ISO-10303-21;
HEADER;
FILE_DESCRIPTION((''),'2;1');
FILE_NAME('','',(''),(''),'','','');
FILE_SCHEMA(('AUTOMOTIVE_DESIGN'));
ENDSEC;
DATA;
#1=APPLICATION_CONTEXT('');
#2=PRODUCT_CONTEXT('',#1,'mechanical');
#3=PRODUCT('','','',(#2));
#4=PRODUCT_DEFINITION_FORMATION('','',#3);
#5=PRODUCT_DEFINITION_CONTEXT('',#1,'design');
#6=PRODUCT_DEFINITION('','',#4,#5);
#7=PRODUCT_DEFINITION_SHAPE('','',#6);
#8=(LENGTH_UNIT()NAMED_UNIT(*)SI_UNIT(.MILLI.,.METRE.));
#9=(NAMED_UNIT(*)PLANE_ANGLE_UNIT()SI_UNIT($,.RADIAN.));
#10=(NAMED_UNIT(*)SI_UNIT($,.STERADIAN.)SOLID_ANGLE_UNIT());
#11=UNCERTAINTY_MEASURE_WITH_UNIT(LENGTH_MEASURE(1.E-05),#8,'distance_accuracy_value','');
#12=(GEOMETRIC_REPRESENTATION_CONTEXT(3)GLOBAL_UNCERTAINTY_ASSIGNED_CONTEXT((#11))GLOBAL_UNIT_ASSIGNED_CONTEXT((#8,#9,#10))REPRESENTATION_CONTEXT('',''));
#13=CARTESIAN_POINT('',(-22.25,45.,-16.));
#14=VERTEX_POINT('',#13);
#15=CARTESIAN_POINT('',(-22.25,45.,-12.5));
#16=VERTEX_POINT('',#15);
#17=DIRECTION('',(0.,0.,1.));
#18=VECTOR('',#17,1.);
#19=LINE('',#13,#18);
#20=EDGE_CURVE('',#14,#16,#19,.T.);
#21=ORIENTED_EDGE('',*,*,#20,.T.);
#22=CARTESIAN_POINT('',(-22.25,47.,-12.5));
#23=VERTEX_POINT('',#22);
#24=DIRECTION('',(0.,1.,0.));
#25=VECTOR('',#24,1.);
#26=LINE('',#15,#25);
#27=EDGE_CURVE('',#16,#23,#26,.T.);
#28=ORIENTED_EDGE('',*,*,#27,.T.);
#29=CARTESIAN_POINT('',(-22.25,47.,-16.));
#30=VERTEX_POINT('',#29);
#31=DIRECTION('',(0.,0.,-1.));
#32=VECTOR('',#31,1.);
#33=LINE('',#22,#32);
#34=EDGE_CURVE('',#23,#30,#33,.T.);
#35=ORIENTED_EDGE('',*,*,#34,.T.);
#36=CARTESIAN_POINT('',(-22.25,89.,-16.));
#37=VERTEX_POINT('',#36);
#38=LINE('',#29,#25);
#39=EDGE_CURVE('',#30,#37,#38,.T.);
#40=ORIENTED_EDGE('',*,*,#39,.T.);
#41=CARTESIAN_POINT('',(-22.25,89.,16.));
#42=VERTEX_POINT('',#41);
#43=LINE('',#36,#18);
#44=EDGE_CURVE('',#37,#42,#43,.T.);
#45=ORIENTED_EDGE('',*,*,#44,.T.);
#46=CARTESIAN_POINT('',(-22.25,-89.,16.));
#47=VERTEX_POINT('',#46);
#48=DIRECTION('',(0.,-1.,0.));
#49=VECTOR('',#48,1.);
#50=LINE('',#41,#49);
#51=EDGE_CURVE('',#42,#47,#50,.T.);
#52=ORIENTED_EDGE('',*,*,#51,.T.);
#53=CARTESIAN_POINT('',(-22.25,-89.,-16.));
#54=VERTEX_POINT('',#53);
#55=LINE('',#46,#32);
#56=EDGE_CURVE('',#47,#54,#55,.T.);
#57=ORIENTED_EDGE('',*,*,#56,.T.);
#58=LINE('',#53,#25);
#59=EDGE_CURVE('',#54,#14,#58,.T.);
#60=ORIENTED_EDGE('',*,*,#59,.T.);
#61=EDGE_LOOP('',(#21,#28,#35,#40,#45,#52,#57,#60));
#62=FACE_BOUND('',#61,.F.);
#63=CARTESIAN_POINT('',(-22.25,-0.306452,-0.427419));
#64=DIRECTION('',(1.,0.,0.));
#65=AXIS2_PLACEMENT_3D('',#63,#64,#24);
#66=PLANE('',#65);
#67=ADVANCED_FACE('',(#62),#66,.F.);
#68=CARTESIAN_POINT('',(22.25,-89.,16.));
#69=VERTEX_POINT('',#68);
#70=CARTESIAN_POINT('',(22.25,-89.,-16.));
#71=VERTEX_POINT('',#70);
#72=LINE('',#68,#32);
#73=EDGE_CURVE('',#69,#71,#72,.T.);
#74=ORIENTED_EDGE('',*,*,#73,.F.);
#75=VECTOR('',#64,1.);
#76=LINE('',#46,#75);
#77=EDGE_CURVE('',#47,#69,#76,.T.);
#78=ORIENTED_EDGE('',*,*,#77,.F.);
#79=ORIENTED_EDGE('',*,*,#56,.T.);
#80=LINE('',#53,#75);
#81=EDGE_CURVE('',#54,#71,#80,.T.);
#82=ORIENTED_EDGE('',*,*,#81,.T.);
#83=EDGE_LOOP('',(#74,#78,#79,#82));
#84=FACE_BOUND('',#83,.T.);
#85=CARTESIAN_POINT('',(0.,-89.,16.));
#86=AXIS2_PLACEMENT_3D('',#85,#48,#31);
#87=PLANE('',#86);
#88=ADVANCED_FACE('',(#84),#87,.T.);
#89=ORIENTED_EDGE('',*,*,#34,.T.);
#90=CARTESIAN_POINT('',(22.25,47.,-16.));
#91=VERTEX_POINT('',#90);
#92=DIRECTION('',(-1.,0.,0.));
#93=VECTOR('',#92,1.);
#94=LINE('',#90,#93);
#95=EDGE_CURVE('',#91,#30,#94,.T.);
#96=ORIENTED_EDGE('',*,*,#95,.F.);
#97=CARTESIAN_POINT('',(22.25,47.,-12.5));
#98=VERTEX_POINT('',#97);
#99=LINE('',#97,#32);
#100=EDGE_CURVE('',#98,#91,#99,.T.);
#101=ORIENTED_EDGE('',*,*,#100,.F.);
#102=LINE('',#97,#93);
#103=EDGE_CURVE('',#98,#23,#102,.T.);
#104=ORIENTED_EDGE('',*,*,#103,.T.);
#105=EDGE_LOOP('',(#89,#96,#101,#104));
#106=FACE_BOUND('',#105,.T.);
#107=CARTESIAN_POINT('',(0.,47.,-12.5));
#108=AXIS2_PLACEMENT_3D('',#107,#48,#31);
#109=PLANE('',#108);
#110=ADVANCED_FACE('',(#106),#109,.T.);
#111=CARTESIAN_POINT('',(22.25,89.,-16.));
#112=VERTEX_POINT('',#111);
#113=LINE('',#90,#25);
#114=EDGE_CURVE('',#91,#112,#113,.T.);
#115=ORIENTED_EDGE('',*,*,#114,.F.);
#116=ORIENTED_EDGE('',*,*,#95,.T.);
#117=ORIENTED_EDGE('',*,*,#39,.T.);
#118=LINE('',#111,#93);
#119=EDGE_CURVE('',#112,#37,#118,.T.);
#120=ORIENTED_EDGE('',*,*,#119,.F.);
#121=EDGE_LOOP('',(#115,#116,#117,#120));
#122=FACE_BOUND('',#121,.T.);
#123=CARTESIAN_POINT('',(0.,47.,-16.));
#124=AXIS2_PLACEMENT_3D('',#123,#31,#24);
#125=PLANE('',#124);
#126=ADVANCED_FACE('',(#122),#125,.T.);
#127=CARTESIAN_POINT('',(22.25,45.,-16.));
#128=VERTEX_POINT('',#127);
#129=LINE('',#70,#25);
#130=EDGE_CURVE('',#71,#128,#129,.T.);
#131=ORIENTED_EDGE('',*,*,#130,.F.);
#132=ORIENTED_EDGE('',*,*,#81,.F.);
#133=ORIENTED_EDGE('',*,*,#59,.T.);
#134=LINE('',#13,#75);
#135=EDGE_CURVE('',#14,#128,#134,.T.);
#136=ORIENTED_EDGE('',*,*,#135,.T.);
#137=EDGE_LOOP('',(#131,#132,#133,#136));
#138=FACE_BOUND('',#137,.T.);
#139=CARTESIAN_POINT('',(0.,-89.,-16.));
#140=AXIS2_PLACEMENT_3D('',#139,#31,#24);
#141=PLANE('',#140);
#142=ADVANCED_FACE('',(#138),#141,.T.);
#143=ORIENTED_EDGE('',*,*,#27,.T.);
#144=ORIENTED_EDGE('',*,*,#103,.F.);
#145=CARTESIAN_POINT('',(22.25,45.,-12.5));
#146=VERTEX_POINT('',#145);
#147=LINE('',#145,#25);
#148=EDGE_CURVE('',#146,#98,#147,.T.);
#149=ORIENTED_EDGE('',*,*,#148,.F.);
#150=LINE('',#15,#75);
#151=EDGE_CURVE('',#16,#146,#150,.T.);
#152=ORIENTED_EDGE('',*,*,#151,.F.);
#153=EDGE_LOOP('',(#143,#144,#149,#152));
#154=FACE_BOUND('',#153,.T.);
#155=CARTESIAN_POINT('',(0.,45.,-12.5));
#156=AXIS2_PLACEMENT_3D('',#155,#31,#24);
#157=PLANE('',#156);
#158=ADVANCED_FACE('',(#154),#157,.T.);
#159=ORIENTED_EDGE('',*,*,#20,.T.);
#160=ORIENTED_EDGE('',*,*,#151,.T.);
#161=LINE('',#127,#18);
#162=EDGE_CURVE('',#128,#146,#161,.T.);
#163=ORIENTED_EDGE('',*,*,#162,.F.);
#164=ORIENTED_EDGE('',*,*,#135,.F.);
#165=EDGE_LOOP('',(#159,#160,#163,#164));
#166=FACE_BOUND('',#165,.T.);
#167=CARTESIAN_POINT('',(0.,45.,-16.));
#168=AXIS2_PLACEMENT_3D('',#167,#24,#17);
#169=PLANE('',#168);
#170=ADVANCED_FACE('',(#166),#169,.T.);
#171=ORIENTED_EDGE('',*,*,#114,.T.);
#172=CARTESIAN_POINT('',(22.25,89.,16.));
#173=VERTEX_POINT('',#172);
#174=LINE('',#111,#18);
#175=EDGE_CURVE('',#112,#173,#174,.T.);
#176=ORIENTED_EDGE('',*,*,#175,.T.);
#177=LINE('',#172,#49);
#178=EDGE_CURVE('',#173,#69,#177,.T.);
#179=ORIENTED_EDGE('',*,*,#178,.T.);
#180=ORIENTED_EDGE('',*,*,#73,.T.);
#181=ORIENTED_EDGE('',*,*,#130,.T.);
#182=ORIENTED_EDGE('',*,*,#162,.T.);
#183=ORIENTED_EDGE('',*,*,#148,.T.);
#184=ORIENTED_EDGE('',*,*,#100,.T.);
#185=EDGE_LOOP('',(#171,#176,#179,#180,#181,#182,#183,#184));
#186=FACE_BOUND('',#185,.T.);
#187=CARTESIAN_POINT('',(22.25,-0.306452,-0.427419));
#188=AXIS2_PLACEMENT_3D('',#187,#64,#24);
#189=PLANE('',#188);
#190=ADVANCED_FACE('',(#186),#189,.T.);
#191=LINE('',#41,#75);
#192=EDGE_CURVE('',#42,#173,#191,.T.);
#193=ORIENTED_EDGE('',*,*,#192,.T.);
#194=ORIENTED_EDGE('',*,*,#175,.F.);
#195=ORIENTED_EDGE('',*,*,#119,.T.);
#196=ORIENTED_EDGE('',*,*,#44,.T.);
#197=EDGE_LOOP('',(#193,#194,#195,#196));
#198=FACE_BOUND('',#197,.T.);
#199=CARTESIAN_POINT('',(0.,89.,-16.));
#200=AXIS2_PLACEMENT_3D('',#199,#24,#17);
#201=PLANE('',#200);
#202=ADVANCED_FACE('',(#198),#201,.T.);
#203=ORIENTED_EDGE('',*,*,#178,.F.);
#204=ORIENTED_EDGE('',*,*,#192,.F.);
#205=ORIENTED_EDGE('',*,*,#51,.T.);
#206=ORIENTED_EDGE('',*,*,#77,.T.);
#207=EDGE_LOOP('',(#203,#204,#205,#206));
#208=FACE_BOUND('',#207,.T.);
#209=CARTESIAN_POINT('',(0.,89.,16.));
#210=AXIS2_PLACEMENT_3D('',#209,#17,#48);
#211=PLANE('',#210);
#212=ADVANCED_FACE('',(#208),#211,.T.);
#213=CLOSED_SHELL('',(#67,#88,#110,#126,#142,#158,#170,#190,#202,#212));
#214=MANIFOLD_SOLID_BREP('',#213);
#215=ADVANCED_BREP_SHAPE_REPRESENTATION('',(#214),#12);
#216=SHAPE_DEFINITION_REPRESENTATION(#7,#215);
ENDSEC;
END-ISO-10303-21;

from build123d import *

# Parameters (mm, degrees)
F0_W     = 2
F0_H     = 3.5
F1_DEPTH = 22.25


# Not quite as in the source:
# - a feature of the source that left no trace in its solid (it failed there, or was rolled back) is left out


with BuildPart() as f1:
    # F0 (on Right) → F1 (new body, symmetric)
    with BuildSketch(Plane.YZ):
        Polygon((89, -16), (89, 16), (-89, 16), (-89, -16), (-66, -16), (-66, -12.5), (-64, -12.5), (-64, -16), (45, -16), (45, -12.5), (47, -12.5), (47, -16), align=None)
        with Locations((-65, -14.25)):
            Rectangle(F0_W, F0_H)
    extrude(amount=F1_DEPTH, both=True)


solid = f1.part
